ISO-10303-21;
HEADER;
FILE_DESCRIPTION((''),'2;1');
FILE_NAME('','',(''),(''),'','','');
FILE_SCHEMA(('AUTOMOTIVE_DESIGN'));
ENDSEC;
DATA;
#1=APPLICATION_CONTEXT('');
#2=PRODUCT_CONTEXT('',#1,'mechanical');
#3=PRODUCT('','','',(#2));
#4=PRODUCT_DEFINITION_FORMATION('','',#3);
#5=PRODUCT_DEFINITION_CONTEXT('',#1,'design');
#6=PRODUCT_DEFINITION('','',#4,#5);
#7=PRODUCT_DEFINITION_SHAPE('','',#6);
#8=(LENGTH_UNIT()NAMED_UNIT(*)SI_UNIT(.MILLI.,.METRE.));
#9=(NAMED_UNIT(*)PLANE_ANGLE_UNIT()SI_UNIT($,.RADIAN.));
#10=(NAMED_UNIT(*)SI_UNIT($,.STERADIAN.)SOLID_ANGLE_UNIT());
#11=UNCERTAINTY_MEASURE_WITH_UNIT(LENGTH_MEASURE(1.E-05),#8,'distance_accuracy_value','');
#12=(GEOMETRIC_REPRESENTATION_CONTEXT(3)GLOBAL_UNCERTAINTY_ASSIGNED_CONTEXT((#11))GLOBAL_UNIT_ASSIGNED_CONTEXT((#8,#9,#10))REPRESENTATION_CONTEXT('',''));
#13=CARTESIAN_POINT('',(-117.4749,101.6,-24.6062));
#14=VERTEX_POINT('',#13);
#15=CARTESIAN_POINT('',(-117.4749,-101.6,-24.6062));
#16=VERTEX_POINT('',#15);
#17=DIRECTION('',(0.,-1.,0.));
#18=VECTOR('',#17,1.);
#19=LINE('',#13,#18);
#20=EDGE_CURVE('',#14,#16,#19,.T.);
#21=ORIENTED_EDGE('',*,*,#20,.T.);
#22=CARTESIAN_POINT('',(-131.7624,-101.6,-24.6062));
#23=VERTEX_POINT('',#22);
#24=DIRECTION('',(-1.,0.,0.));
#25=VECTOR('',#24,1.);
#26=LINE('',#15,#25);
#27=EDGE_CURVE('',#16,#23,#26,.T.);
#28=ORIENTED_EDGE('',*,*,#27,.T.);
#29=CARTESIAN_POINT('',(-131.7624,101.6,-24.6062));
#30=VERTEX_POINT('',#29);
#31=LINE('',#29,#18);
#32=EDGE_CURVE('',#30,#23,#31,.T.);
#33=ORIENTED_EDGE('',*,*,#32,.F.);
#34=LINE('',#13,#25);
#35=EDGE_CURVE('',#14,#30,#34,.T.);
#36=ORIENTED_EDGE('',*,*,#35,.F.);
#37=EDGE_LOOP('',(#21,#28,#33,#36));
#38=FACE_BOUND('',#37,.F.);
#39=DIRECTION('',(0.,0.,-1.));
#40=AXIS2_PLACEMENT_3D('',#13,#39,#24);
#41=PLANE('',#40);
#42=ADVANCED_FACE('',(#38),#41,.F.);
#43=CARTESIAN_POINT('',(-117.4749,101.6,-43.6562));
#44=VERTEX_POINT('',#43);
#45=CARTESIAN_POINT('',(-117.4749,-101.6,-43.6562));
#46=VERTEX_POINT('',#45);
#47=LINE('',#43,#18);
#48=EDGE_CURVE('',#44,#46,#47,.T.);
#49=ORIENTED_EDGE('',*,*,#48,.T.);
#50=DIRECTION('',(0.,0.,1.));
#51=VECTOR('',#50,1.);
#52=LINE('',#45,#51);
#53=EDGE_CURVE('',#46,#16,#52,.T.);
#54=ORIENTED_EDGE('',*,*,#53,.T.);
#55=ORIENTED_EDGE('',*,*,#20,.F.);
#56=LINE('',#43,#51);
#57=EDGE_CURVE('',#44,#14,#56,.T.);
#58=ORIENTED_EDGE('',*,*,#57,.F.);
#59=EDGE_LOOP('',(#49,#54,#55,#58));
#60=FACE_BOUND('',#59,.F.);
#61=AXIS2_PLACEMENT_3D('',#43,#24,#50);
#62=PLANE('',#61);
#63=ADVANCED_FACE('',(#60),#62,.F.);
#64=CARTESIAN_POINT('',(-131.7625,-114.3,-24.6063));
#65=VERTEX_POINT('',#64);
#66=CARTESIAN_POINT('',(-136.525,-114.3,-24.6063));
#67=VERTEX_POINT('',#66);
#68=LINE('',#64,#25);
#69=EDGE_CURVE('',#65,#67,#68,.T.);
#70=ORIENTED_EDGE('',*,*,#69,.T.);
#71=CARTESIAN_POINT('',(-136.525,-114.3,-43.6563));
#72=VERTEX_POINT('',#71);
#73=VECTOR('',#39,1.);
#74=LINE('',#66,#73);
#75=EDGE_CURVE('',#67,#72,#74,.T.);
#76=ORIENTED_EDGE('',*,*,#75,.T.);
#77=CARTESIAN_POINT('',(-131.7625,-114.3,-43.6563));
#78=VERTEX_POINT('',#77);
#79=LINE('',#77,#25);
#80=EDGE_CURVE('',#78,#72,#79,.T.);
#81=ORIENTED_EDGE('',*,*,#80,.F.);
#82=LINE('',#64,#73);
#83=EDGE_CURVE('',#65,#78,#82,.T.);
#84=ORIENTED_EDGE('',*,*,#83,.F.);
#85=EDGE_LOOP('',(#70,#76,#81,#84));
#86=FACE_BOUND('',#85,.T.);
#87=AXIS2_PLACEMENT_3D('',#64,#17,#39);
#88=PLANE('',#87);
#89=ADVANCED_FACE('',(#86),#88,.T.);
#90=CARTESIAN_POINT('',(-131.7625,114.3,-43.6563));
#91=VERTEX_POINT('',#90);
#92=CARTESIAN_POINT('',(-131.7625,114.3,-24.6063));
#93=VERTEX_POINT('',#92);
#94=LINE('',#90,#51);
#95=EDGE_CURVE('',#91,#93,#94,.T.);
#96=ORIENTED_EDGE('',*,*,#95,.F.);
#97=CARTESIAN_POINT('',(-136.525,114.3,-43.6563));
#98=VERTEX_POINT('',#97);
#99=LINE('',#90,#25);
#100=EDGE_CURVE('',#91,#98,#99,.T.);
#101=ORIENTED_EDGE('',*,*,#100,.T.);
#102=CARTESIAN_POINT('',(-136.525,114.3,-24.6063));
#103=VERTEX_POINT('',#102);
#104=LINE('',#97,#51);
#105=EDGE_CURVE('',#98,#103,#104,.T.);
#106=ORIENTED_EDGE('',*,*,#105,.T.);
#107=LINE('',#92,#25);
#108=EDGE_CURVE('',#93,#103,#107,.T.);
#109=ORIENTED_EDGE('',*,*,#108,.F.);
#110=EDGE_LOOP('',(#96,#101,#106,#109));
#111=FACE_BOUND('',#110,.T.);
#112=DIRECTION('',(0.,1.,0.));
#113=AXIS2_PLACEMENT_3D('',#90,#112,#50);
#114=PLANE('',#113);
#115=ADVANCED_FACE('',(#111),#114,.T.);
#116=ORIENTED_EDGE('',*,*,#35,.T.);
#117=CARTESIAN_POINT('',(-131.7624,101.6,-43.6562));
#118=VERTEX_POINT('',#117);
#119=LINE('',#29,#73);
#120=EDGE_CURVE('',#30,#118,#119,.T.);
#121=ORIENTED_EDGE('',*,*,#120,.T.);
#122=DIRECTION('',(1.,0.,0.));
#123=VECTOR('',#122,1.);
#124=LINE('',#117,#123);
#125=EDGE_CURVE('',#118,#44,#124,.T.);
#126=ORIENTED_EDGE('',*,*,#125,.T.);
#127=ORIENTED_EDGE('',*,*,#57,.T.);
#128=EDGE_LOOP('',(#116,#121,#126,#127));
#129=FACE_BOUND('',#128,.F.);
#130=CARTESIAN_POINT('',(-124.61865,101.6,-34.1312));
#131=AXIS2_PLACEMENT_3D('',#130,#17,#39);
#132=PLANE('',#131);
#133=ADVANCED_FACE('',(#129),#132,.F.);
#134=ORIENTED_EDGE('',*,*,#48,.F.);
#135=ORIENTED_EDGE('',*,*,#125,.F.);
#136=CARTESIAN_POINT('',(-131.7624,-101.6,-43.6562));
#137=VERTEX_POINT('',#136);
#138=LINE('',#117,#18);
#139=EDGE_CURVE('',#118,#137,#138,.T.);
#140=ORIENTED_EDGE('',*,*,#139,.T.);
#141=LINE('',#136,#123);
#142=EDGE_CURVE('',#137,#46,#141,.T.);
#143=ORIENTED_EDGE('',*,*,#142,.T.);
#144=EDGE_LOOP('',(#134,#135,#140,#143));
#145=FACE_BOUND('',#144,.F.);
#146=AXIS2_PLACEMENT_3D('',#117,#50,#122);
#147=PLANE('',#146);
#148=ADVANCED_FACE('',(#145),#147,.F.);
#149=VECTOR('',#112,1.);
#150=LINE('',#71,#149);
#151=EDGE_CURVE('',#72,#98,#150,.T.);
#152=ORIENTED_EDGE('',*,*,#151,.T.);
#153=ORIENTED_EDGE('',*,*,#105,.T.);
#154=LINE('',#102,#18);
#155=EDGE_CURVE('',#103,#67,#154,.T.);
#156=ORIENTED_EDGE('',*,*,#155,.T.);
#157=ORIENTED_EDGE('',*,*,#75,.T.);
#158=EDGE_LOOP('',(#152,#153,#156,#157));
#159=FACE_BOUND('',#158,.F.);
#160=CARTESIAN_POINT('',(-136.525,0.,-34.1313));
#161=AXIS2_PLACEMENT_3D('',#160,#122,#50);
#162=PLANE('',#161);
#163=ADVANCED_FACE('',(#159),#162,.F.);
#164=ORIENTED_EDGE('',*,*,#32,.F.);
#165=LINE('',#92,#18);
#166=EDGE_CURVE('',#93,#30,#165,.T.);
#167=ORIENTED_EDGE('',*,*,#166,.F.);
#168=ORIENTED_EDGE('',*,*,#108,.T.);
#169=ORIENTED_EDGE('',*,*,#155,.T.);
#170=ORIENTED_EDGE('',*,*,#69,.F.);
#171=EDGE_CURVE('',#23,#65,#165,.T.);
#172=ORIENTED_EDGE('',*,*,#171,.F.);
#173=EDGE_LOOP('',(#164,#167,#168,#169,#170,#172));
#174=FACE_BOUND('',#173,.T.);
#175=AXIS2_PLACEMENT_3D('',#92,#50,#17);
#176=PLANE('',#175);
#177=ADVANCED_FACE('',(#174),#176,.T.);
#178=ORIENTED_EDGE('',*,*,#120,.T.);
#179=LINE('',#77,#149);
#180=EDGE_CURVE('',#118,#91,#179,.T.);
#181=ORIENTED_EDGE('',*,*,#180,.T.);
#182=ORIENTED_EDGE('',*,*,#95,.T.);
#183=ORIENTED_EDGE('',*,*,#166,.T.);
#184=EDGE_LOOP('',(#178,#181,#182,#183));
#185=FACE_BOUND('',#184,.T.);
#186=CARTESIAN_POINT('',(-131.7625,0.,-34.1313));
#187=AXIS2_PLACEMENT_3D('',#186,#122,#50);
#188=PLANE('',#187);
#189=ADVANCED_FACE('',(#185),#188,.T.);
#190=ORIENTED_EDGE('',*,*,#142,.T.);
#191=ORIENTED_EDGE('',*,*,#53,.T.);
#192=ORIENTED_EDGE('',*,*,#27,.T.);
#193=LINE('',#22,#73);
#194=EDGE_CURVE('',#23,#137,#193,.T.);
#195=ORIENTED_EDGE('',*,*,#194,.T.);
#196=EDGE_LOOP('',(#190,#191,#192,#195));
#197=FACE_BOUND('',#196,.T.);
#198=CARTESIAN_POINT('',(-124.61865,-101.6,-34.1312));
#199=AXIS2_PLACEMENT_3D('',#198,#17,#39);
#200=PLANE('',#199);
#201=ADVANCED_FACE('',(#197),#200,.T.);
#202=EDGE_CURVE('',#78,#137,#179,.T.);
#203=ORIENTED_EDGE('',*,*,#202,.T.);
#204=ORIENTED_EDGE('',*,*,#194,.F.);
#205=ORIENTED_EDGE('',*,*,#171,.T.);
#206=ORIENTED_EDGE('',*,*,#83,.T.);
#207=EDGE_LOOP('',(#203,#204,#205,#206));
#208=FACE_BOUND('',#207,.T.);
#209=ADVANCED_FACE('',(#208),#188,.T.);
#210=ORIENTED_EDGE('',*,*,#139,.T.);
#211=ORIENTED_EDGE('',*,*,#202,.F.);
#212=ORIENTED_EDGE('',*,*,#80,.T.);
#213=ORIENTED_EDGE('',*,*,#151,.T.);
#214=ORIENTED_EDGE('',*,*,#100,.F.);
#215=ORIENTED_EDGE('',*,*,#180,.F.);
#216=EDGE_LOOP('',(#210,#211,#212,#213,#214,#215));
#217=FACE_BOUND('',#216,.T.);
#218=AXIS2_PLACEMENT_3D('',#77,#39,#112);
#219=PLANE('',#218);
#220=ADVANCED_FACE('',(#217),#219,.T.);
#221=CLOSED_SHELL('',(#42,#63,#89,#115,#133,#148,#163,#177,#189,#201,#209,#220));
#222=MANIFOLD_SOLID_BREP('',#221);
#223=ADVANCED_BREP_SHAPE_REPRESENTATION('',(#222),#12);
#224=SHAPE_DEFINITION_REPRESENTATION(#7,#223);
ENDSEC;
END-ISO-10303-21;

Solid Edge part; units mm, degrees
sketch "Sketch1" plane through (-70.6437, 101.6, 0) normal (0, -1, 0) x (1, 0, 0)
  line L0 (-61.1187, -43.6562) -> (-46.8312, -43.6562)
  line L1 (-46.8312, -43.6562) -> (-46.8312, -24.6062)
  line L2 (-46.8312, -24.6062) -> (-61.1187, -24.6062)
  line L3 (-61.1187, -24.6062) -> (-61.1187, -43.6562)
  dimension "D1" = 14.2875
  dimension "D2" = 19.05
extrude "Protrusion1" add sketch "Sketch1" along normal up to vertex (203.2 mm away)
sketch "Sketch2" plane through (-131.7625, 0, -34.1313) normal (-1, 0, 0) x (0, -1, 0)
  line L0 (-114.3, 9.525) -> (114.3, 9.525)
  line L1 (114.3, 9.525) -> (114.3, -9.525)
  line L2 (114.3, -9.525) -> (-114.3, -9.525)
  line L3 (-114.3, -9.525) -> (-114.3, 9.525)
  dimension "D1" = 12.7
  dimension "D2" = 12.7
extrude "Protrusion2" add sketch "Sketch2" along normal blind 4.7625
